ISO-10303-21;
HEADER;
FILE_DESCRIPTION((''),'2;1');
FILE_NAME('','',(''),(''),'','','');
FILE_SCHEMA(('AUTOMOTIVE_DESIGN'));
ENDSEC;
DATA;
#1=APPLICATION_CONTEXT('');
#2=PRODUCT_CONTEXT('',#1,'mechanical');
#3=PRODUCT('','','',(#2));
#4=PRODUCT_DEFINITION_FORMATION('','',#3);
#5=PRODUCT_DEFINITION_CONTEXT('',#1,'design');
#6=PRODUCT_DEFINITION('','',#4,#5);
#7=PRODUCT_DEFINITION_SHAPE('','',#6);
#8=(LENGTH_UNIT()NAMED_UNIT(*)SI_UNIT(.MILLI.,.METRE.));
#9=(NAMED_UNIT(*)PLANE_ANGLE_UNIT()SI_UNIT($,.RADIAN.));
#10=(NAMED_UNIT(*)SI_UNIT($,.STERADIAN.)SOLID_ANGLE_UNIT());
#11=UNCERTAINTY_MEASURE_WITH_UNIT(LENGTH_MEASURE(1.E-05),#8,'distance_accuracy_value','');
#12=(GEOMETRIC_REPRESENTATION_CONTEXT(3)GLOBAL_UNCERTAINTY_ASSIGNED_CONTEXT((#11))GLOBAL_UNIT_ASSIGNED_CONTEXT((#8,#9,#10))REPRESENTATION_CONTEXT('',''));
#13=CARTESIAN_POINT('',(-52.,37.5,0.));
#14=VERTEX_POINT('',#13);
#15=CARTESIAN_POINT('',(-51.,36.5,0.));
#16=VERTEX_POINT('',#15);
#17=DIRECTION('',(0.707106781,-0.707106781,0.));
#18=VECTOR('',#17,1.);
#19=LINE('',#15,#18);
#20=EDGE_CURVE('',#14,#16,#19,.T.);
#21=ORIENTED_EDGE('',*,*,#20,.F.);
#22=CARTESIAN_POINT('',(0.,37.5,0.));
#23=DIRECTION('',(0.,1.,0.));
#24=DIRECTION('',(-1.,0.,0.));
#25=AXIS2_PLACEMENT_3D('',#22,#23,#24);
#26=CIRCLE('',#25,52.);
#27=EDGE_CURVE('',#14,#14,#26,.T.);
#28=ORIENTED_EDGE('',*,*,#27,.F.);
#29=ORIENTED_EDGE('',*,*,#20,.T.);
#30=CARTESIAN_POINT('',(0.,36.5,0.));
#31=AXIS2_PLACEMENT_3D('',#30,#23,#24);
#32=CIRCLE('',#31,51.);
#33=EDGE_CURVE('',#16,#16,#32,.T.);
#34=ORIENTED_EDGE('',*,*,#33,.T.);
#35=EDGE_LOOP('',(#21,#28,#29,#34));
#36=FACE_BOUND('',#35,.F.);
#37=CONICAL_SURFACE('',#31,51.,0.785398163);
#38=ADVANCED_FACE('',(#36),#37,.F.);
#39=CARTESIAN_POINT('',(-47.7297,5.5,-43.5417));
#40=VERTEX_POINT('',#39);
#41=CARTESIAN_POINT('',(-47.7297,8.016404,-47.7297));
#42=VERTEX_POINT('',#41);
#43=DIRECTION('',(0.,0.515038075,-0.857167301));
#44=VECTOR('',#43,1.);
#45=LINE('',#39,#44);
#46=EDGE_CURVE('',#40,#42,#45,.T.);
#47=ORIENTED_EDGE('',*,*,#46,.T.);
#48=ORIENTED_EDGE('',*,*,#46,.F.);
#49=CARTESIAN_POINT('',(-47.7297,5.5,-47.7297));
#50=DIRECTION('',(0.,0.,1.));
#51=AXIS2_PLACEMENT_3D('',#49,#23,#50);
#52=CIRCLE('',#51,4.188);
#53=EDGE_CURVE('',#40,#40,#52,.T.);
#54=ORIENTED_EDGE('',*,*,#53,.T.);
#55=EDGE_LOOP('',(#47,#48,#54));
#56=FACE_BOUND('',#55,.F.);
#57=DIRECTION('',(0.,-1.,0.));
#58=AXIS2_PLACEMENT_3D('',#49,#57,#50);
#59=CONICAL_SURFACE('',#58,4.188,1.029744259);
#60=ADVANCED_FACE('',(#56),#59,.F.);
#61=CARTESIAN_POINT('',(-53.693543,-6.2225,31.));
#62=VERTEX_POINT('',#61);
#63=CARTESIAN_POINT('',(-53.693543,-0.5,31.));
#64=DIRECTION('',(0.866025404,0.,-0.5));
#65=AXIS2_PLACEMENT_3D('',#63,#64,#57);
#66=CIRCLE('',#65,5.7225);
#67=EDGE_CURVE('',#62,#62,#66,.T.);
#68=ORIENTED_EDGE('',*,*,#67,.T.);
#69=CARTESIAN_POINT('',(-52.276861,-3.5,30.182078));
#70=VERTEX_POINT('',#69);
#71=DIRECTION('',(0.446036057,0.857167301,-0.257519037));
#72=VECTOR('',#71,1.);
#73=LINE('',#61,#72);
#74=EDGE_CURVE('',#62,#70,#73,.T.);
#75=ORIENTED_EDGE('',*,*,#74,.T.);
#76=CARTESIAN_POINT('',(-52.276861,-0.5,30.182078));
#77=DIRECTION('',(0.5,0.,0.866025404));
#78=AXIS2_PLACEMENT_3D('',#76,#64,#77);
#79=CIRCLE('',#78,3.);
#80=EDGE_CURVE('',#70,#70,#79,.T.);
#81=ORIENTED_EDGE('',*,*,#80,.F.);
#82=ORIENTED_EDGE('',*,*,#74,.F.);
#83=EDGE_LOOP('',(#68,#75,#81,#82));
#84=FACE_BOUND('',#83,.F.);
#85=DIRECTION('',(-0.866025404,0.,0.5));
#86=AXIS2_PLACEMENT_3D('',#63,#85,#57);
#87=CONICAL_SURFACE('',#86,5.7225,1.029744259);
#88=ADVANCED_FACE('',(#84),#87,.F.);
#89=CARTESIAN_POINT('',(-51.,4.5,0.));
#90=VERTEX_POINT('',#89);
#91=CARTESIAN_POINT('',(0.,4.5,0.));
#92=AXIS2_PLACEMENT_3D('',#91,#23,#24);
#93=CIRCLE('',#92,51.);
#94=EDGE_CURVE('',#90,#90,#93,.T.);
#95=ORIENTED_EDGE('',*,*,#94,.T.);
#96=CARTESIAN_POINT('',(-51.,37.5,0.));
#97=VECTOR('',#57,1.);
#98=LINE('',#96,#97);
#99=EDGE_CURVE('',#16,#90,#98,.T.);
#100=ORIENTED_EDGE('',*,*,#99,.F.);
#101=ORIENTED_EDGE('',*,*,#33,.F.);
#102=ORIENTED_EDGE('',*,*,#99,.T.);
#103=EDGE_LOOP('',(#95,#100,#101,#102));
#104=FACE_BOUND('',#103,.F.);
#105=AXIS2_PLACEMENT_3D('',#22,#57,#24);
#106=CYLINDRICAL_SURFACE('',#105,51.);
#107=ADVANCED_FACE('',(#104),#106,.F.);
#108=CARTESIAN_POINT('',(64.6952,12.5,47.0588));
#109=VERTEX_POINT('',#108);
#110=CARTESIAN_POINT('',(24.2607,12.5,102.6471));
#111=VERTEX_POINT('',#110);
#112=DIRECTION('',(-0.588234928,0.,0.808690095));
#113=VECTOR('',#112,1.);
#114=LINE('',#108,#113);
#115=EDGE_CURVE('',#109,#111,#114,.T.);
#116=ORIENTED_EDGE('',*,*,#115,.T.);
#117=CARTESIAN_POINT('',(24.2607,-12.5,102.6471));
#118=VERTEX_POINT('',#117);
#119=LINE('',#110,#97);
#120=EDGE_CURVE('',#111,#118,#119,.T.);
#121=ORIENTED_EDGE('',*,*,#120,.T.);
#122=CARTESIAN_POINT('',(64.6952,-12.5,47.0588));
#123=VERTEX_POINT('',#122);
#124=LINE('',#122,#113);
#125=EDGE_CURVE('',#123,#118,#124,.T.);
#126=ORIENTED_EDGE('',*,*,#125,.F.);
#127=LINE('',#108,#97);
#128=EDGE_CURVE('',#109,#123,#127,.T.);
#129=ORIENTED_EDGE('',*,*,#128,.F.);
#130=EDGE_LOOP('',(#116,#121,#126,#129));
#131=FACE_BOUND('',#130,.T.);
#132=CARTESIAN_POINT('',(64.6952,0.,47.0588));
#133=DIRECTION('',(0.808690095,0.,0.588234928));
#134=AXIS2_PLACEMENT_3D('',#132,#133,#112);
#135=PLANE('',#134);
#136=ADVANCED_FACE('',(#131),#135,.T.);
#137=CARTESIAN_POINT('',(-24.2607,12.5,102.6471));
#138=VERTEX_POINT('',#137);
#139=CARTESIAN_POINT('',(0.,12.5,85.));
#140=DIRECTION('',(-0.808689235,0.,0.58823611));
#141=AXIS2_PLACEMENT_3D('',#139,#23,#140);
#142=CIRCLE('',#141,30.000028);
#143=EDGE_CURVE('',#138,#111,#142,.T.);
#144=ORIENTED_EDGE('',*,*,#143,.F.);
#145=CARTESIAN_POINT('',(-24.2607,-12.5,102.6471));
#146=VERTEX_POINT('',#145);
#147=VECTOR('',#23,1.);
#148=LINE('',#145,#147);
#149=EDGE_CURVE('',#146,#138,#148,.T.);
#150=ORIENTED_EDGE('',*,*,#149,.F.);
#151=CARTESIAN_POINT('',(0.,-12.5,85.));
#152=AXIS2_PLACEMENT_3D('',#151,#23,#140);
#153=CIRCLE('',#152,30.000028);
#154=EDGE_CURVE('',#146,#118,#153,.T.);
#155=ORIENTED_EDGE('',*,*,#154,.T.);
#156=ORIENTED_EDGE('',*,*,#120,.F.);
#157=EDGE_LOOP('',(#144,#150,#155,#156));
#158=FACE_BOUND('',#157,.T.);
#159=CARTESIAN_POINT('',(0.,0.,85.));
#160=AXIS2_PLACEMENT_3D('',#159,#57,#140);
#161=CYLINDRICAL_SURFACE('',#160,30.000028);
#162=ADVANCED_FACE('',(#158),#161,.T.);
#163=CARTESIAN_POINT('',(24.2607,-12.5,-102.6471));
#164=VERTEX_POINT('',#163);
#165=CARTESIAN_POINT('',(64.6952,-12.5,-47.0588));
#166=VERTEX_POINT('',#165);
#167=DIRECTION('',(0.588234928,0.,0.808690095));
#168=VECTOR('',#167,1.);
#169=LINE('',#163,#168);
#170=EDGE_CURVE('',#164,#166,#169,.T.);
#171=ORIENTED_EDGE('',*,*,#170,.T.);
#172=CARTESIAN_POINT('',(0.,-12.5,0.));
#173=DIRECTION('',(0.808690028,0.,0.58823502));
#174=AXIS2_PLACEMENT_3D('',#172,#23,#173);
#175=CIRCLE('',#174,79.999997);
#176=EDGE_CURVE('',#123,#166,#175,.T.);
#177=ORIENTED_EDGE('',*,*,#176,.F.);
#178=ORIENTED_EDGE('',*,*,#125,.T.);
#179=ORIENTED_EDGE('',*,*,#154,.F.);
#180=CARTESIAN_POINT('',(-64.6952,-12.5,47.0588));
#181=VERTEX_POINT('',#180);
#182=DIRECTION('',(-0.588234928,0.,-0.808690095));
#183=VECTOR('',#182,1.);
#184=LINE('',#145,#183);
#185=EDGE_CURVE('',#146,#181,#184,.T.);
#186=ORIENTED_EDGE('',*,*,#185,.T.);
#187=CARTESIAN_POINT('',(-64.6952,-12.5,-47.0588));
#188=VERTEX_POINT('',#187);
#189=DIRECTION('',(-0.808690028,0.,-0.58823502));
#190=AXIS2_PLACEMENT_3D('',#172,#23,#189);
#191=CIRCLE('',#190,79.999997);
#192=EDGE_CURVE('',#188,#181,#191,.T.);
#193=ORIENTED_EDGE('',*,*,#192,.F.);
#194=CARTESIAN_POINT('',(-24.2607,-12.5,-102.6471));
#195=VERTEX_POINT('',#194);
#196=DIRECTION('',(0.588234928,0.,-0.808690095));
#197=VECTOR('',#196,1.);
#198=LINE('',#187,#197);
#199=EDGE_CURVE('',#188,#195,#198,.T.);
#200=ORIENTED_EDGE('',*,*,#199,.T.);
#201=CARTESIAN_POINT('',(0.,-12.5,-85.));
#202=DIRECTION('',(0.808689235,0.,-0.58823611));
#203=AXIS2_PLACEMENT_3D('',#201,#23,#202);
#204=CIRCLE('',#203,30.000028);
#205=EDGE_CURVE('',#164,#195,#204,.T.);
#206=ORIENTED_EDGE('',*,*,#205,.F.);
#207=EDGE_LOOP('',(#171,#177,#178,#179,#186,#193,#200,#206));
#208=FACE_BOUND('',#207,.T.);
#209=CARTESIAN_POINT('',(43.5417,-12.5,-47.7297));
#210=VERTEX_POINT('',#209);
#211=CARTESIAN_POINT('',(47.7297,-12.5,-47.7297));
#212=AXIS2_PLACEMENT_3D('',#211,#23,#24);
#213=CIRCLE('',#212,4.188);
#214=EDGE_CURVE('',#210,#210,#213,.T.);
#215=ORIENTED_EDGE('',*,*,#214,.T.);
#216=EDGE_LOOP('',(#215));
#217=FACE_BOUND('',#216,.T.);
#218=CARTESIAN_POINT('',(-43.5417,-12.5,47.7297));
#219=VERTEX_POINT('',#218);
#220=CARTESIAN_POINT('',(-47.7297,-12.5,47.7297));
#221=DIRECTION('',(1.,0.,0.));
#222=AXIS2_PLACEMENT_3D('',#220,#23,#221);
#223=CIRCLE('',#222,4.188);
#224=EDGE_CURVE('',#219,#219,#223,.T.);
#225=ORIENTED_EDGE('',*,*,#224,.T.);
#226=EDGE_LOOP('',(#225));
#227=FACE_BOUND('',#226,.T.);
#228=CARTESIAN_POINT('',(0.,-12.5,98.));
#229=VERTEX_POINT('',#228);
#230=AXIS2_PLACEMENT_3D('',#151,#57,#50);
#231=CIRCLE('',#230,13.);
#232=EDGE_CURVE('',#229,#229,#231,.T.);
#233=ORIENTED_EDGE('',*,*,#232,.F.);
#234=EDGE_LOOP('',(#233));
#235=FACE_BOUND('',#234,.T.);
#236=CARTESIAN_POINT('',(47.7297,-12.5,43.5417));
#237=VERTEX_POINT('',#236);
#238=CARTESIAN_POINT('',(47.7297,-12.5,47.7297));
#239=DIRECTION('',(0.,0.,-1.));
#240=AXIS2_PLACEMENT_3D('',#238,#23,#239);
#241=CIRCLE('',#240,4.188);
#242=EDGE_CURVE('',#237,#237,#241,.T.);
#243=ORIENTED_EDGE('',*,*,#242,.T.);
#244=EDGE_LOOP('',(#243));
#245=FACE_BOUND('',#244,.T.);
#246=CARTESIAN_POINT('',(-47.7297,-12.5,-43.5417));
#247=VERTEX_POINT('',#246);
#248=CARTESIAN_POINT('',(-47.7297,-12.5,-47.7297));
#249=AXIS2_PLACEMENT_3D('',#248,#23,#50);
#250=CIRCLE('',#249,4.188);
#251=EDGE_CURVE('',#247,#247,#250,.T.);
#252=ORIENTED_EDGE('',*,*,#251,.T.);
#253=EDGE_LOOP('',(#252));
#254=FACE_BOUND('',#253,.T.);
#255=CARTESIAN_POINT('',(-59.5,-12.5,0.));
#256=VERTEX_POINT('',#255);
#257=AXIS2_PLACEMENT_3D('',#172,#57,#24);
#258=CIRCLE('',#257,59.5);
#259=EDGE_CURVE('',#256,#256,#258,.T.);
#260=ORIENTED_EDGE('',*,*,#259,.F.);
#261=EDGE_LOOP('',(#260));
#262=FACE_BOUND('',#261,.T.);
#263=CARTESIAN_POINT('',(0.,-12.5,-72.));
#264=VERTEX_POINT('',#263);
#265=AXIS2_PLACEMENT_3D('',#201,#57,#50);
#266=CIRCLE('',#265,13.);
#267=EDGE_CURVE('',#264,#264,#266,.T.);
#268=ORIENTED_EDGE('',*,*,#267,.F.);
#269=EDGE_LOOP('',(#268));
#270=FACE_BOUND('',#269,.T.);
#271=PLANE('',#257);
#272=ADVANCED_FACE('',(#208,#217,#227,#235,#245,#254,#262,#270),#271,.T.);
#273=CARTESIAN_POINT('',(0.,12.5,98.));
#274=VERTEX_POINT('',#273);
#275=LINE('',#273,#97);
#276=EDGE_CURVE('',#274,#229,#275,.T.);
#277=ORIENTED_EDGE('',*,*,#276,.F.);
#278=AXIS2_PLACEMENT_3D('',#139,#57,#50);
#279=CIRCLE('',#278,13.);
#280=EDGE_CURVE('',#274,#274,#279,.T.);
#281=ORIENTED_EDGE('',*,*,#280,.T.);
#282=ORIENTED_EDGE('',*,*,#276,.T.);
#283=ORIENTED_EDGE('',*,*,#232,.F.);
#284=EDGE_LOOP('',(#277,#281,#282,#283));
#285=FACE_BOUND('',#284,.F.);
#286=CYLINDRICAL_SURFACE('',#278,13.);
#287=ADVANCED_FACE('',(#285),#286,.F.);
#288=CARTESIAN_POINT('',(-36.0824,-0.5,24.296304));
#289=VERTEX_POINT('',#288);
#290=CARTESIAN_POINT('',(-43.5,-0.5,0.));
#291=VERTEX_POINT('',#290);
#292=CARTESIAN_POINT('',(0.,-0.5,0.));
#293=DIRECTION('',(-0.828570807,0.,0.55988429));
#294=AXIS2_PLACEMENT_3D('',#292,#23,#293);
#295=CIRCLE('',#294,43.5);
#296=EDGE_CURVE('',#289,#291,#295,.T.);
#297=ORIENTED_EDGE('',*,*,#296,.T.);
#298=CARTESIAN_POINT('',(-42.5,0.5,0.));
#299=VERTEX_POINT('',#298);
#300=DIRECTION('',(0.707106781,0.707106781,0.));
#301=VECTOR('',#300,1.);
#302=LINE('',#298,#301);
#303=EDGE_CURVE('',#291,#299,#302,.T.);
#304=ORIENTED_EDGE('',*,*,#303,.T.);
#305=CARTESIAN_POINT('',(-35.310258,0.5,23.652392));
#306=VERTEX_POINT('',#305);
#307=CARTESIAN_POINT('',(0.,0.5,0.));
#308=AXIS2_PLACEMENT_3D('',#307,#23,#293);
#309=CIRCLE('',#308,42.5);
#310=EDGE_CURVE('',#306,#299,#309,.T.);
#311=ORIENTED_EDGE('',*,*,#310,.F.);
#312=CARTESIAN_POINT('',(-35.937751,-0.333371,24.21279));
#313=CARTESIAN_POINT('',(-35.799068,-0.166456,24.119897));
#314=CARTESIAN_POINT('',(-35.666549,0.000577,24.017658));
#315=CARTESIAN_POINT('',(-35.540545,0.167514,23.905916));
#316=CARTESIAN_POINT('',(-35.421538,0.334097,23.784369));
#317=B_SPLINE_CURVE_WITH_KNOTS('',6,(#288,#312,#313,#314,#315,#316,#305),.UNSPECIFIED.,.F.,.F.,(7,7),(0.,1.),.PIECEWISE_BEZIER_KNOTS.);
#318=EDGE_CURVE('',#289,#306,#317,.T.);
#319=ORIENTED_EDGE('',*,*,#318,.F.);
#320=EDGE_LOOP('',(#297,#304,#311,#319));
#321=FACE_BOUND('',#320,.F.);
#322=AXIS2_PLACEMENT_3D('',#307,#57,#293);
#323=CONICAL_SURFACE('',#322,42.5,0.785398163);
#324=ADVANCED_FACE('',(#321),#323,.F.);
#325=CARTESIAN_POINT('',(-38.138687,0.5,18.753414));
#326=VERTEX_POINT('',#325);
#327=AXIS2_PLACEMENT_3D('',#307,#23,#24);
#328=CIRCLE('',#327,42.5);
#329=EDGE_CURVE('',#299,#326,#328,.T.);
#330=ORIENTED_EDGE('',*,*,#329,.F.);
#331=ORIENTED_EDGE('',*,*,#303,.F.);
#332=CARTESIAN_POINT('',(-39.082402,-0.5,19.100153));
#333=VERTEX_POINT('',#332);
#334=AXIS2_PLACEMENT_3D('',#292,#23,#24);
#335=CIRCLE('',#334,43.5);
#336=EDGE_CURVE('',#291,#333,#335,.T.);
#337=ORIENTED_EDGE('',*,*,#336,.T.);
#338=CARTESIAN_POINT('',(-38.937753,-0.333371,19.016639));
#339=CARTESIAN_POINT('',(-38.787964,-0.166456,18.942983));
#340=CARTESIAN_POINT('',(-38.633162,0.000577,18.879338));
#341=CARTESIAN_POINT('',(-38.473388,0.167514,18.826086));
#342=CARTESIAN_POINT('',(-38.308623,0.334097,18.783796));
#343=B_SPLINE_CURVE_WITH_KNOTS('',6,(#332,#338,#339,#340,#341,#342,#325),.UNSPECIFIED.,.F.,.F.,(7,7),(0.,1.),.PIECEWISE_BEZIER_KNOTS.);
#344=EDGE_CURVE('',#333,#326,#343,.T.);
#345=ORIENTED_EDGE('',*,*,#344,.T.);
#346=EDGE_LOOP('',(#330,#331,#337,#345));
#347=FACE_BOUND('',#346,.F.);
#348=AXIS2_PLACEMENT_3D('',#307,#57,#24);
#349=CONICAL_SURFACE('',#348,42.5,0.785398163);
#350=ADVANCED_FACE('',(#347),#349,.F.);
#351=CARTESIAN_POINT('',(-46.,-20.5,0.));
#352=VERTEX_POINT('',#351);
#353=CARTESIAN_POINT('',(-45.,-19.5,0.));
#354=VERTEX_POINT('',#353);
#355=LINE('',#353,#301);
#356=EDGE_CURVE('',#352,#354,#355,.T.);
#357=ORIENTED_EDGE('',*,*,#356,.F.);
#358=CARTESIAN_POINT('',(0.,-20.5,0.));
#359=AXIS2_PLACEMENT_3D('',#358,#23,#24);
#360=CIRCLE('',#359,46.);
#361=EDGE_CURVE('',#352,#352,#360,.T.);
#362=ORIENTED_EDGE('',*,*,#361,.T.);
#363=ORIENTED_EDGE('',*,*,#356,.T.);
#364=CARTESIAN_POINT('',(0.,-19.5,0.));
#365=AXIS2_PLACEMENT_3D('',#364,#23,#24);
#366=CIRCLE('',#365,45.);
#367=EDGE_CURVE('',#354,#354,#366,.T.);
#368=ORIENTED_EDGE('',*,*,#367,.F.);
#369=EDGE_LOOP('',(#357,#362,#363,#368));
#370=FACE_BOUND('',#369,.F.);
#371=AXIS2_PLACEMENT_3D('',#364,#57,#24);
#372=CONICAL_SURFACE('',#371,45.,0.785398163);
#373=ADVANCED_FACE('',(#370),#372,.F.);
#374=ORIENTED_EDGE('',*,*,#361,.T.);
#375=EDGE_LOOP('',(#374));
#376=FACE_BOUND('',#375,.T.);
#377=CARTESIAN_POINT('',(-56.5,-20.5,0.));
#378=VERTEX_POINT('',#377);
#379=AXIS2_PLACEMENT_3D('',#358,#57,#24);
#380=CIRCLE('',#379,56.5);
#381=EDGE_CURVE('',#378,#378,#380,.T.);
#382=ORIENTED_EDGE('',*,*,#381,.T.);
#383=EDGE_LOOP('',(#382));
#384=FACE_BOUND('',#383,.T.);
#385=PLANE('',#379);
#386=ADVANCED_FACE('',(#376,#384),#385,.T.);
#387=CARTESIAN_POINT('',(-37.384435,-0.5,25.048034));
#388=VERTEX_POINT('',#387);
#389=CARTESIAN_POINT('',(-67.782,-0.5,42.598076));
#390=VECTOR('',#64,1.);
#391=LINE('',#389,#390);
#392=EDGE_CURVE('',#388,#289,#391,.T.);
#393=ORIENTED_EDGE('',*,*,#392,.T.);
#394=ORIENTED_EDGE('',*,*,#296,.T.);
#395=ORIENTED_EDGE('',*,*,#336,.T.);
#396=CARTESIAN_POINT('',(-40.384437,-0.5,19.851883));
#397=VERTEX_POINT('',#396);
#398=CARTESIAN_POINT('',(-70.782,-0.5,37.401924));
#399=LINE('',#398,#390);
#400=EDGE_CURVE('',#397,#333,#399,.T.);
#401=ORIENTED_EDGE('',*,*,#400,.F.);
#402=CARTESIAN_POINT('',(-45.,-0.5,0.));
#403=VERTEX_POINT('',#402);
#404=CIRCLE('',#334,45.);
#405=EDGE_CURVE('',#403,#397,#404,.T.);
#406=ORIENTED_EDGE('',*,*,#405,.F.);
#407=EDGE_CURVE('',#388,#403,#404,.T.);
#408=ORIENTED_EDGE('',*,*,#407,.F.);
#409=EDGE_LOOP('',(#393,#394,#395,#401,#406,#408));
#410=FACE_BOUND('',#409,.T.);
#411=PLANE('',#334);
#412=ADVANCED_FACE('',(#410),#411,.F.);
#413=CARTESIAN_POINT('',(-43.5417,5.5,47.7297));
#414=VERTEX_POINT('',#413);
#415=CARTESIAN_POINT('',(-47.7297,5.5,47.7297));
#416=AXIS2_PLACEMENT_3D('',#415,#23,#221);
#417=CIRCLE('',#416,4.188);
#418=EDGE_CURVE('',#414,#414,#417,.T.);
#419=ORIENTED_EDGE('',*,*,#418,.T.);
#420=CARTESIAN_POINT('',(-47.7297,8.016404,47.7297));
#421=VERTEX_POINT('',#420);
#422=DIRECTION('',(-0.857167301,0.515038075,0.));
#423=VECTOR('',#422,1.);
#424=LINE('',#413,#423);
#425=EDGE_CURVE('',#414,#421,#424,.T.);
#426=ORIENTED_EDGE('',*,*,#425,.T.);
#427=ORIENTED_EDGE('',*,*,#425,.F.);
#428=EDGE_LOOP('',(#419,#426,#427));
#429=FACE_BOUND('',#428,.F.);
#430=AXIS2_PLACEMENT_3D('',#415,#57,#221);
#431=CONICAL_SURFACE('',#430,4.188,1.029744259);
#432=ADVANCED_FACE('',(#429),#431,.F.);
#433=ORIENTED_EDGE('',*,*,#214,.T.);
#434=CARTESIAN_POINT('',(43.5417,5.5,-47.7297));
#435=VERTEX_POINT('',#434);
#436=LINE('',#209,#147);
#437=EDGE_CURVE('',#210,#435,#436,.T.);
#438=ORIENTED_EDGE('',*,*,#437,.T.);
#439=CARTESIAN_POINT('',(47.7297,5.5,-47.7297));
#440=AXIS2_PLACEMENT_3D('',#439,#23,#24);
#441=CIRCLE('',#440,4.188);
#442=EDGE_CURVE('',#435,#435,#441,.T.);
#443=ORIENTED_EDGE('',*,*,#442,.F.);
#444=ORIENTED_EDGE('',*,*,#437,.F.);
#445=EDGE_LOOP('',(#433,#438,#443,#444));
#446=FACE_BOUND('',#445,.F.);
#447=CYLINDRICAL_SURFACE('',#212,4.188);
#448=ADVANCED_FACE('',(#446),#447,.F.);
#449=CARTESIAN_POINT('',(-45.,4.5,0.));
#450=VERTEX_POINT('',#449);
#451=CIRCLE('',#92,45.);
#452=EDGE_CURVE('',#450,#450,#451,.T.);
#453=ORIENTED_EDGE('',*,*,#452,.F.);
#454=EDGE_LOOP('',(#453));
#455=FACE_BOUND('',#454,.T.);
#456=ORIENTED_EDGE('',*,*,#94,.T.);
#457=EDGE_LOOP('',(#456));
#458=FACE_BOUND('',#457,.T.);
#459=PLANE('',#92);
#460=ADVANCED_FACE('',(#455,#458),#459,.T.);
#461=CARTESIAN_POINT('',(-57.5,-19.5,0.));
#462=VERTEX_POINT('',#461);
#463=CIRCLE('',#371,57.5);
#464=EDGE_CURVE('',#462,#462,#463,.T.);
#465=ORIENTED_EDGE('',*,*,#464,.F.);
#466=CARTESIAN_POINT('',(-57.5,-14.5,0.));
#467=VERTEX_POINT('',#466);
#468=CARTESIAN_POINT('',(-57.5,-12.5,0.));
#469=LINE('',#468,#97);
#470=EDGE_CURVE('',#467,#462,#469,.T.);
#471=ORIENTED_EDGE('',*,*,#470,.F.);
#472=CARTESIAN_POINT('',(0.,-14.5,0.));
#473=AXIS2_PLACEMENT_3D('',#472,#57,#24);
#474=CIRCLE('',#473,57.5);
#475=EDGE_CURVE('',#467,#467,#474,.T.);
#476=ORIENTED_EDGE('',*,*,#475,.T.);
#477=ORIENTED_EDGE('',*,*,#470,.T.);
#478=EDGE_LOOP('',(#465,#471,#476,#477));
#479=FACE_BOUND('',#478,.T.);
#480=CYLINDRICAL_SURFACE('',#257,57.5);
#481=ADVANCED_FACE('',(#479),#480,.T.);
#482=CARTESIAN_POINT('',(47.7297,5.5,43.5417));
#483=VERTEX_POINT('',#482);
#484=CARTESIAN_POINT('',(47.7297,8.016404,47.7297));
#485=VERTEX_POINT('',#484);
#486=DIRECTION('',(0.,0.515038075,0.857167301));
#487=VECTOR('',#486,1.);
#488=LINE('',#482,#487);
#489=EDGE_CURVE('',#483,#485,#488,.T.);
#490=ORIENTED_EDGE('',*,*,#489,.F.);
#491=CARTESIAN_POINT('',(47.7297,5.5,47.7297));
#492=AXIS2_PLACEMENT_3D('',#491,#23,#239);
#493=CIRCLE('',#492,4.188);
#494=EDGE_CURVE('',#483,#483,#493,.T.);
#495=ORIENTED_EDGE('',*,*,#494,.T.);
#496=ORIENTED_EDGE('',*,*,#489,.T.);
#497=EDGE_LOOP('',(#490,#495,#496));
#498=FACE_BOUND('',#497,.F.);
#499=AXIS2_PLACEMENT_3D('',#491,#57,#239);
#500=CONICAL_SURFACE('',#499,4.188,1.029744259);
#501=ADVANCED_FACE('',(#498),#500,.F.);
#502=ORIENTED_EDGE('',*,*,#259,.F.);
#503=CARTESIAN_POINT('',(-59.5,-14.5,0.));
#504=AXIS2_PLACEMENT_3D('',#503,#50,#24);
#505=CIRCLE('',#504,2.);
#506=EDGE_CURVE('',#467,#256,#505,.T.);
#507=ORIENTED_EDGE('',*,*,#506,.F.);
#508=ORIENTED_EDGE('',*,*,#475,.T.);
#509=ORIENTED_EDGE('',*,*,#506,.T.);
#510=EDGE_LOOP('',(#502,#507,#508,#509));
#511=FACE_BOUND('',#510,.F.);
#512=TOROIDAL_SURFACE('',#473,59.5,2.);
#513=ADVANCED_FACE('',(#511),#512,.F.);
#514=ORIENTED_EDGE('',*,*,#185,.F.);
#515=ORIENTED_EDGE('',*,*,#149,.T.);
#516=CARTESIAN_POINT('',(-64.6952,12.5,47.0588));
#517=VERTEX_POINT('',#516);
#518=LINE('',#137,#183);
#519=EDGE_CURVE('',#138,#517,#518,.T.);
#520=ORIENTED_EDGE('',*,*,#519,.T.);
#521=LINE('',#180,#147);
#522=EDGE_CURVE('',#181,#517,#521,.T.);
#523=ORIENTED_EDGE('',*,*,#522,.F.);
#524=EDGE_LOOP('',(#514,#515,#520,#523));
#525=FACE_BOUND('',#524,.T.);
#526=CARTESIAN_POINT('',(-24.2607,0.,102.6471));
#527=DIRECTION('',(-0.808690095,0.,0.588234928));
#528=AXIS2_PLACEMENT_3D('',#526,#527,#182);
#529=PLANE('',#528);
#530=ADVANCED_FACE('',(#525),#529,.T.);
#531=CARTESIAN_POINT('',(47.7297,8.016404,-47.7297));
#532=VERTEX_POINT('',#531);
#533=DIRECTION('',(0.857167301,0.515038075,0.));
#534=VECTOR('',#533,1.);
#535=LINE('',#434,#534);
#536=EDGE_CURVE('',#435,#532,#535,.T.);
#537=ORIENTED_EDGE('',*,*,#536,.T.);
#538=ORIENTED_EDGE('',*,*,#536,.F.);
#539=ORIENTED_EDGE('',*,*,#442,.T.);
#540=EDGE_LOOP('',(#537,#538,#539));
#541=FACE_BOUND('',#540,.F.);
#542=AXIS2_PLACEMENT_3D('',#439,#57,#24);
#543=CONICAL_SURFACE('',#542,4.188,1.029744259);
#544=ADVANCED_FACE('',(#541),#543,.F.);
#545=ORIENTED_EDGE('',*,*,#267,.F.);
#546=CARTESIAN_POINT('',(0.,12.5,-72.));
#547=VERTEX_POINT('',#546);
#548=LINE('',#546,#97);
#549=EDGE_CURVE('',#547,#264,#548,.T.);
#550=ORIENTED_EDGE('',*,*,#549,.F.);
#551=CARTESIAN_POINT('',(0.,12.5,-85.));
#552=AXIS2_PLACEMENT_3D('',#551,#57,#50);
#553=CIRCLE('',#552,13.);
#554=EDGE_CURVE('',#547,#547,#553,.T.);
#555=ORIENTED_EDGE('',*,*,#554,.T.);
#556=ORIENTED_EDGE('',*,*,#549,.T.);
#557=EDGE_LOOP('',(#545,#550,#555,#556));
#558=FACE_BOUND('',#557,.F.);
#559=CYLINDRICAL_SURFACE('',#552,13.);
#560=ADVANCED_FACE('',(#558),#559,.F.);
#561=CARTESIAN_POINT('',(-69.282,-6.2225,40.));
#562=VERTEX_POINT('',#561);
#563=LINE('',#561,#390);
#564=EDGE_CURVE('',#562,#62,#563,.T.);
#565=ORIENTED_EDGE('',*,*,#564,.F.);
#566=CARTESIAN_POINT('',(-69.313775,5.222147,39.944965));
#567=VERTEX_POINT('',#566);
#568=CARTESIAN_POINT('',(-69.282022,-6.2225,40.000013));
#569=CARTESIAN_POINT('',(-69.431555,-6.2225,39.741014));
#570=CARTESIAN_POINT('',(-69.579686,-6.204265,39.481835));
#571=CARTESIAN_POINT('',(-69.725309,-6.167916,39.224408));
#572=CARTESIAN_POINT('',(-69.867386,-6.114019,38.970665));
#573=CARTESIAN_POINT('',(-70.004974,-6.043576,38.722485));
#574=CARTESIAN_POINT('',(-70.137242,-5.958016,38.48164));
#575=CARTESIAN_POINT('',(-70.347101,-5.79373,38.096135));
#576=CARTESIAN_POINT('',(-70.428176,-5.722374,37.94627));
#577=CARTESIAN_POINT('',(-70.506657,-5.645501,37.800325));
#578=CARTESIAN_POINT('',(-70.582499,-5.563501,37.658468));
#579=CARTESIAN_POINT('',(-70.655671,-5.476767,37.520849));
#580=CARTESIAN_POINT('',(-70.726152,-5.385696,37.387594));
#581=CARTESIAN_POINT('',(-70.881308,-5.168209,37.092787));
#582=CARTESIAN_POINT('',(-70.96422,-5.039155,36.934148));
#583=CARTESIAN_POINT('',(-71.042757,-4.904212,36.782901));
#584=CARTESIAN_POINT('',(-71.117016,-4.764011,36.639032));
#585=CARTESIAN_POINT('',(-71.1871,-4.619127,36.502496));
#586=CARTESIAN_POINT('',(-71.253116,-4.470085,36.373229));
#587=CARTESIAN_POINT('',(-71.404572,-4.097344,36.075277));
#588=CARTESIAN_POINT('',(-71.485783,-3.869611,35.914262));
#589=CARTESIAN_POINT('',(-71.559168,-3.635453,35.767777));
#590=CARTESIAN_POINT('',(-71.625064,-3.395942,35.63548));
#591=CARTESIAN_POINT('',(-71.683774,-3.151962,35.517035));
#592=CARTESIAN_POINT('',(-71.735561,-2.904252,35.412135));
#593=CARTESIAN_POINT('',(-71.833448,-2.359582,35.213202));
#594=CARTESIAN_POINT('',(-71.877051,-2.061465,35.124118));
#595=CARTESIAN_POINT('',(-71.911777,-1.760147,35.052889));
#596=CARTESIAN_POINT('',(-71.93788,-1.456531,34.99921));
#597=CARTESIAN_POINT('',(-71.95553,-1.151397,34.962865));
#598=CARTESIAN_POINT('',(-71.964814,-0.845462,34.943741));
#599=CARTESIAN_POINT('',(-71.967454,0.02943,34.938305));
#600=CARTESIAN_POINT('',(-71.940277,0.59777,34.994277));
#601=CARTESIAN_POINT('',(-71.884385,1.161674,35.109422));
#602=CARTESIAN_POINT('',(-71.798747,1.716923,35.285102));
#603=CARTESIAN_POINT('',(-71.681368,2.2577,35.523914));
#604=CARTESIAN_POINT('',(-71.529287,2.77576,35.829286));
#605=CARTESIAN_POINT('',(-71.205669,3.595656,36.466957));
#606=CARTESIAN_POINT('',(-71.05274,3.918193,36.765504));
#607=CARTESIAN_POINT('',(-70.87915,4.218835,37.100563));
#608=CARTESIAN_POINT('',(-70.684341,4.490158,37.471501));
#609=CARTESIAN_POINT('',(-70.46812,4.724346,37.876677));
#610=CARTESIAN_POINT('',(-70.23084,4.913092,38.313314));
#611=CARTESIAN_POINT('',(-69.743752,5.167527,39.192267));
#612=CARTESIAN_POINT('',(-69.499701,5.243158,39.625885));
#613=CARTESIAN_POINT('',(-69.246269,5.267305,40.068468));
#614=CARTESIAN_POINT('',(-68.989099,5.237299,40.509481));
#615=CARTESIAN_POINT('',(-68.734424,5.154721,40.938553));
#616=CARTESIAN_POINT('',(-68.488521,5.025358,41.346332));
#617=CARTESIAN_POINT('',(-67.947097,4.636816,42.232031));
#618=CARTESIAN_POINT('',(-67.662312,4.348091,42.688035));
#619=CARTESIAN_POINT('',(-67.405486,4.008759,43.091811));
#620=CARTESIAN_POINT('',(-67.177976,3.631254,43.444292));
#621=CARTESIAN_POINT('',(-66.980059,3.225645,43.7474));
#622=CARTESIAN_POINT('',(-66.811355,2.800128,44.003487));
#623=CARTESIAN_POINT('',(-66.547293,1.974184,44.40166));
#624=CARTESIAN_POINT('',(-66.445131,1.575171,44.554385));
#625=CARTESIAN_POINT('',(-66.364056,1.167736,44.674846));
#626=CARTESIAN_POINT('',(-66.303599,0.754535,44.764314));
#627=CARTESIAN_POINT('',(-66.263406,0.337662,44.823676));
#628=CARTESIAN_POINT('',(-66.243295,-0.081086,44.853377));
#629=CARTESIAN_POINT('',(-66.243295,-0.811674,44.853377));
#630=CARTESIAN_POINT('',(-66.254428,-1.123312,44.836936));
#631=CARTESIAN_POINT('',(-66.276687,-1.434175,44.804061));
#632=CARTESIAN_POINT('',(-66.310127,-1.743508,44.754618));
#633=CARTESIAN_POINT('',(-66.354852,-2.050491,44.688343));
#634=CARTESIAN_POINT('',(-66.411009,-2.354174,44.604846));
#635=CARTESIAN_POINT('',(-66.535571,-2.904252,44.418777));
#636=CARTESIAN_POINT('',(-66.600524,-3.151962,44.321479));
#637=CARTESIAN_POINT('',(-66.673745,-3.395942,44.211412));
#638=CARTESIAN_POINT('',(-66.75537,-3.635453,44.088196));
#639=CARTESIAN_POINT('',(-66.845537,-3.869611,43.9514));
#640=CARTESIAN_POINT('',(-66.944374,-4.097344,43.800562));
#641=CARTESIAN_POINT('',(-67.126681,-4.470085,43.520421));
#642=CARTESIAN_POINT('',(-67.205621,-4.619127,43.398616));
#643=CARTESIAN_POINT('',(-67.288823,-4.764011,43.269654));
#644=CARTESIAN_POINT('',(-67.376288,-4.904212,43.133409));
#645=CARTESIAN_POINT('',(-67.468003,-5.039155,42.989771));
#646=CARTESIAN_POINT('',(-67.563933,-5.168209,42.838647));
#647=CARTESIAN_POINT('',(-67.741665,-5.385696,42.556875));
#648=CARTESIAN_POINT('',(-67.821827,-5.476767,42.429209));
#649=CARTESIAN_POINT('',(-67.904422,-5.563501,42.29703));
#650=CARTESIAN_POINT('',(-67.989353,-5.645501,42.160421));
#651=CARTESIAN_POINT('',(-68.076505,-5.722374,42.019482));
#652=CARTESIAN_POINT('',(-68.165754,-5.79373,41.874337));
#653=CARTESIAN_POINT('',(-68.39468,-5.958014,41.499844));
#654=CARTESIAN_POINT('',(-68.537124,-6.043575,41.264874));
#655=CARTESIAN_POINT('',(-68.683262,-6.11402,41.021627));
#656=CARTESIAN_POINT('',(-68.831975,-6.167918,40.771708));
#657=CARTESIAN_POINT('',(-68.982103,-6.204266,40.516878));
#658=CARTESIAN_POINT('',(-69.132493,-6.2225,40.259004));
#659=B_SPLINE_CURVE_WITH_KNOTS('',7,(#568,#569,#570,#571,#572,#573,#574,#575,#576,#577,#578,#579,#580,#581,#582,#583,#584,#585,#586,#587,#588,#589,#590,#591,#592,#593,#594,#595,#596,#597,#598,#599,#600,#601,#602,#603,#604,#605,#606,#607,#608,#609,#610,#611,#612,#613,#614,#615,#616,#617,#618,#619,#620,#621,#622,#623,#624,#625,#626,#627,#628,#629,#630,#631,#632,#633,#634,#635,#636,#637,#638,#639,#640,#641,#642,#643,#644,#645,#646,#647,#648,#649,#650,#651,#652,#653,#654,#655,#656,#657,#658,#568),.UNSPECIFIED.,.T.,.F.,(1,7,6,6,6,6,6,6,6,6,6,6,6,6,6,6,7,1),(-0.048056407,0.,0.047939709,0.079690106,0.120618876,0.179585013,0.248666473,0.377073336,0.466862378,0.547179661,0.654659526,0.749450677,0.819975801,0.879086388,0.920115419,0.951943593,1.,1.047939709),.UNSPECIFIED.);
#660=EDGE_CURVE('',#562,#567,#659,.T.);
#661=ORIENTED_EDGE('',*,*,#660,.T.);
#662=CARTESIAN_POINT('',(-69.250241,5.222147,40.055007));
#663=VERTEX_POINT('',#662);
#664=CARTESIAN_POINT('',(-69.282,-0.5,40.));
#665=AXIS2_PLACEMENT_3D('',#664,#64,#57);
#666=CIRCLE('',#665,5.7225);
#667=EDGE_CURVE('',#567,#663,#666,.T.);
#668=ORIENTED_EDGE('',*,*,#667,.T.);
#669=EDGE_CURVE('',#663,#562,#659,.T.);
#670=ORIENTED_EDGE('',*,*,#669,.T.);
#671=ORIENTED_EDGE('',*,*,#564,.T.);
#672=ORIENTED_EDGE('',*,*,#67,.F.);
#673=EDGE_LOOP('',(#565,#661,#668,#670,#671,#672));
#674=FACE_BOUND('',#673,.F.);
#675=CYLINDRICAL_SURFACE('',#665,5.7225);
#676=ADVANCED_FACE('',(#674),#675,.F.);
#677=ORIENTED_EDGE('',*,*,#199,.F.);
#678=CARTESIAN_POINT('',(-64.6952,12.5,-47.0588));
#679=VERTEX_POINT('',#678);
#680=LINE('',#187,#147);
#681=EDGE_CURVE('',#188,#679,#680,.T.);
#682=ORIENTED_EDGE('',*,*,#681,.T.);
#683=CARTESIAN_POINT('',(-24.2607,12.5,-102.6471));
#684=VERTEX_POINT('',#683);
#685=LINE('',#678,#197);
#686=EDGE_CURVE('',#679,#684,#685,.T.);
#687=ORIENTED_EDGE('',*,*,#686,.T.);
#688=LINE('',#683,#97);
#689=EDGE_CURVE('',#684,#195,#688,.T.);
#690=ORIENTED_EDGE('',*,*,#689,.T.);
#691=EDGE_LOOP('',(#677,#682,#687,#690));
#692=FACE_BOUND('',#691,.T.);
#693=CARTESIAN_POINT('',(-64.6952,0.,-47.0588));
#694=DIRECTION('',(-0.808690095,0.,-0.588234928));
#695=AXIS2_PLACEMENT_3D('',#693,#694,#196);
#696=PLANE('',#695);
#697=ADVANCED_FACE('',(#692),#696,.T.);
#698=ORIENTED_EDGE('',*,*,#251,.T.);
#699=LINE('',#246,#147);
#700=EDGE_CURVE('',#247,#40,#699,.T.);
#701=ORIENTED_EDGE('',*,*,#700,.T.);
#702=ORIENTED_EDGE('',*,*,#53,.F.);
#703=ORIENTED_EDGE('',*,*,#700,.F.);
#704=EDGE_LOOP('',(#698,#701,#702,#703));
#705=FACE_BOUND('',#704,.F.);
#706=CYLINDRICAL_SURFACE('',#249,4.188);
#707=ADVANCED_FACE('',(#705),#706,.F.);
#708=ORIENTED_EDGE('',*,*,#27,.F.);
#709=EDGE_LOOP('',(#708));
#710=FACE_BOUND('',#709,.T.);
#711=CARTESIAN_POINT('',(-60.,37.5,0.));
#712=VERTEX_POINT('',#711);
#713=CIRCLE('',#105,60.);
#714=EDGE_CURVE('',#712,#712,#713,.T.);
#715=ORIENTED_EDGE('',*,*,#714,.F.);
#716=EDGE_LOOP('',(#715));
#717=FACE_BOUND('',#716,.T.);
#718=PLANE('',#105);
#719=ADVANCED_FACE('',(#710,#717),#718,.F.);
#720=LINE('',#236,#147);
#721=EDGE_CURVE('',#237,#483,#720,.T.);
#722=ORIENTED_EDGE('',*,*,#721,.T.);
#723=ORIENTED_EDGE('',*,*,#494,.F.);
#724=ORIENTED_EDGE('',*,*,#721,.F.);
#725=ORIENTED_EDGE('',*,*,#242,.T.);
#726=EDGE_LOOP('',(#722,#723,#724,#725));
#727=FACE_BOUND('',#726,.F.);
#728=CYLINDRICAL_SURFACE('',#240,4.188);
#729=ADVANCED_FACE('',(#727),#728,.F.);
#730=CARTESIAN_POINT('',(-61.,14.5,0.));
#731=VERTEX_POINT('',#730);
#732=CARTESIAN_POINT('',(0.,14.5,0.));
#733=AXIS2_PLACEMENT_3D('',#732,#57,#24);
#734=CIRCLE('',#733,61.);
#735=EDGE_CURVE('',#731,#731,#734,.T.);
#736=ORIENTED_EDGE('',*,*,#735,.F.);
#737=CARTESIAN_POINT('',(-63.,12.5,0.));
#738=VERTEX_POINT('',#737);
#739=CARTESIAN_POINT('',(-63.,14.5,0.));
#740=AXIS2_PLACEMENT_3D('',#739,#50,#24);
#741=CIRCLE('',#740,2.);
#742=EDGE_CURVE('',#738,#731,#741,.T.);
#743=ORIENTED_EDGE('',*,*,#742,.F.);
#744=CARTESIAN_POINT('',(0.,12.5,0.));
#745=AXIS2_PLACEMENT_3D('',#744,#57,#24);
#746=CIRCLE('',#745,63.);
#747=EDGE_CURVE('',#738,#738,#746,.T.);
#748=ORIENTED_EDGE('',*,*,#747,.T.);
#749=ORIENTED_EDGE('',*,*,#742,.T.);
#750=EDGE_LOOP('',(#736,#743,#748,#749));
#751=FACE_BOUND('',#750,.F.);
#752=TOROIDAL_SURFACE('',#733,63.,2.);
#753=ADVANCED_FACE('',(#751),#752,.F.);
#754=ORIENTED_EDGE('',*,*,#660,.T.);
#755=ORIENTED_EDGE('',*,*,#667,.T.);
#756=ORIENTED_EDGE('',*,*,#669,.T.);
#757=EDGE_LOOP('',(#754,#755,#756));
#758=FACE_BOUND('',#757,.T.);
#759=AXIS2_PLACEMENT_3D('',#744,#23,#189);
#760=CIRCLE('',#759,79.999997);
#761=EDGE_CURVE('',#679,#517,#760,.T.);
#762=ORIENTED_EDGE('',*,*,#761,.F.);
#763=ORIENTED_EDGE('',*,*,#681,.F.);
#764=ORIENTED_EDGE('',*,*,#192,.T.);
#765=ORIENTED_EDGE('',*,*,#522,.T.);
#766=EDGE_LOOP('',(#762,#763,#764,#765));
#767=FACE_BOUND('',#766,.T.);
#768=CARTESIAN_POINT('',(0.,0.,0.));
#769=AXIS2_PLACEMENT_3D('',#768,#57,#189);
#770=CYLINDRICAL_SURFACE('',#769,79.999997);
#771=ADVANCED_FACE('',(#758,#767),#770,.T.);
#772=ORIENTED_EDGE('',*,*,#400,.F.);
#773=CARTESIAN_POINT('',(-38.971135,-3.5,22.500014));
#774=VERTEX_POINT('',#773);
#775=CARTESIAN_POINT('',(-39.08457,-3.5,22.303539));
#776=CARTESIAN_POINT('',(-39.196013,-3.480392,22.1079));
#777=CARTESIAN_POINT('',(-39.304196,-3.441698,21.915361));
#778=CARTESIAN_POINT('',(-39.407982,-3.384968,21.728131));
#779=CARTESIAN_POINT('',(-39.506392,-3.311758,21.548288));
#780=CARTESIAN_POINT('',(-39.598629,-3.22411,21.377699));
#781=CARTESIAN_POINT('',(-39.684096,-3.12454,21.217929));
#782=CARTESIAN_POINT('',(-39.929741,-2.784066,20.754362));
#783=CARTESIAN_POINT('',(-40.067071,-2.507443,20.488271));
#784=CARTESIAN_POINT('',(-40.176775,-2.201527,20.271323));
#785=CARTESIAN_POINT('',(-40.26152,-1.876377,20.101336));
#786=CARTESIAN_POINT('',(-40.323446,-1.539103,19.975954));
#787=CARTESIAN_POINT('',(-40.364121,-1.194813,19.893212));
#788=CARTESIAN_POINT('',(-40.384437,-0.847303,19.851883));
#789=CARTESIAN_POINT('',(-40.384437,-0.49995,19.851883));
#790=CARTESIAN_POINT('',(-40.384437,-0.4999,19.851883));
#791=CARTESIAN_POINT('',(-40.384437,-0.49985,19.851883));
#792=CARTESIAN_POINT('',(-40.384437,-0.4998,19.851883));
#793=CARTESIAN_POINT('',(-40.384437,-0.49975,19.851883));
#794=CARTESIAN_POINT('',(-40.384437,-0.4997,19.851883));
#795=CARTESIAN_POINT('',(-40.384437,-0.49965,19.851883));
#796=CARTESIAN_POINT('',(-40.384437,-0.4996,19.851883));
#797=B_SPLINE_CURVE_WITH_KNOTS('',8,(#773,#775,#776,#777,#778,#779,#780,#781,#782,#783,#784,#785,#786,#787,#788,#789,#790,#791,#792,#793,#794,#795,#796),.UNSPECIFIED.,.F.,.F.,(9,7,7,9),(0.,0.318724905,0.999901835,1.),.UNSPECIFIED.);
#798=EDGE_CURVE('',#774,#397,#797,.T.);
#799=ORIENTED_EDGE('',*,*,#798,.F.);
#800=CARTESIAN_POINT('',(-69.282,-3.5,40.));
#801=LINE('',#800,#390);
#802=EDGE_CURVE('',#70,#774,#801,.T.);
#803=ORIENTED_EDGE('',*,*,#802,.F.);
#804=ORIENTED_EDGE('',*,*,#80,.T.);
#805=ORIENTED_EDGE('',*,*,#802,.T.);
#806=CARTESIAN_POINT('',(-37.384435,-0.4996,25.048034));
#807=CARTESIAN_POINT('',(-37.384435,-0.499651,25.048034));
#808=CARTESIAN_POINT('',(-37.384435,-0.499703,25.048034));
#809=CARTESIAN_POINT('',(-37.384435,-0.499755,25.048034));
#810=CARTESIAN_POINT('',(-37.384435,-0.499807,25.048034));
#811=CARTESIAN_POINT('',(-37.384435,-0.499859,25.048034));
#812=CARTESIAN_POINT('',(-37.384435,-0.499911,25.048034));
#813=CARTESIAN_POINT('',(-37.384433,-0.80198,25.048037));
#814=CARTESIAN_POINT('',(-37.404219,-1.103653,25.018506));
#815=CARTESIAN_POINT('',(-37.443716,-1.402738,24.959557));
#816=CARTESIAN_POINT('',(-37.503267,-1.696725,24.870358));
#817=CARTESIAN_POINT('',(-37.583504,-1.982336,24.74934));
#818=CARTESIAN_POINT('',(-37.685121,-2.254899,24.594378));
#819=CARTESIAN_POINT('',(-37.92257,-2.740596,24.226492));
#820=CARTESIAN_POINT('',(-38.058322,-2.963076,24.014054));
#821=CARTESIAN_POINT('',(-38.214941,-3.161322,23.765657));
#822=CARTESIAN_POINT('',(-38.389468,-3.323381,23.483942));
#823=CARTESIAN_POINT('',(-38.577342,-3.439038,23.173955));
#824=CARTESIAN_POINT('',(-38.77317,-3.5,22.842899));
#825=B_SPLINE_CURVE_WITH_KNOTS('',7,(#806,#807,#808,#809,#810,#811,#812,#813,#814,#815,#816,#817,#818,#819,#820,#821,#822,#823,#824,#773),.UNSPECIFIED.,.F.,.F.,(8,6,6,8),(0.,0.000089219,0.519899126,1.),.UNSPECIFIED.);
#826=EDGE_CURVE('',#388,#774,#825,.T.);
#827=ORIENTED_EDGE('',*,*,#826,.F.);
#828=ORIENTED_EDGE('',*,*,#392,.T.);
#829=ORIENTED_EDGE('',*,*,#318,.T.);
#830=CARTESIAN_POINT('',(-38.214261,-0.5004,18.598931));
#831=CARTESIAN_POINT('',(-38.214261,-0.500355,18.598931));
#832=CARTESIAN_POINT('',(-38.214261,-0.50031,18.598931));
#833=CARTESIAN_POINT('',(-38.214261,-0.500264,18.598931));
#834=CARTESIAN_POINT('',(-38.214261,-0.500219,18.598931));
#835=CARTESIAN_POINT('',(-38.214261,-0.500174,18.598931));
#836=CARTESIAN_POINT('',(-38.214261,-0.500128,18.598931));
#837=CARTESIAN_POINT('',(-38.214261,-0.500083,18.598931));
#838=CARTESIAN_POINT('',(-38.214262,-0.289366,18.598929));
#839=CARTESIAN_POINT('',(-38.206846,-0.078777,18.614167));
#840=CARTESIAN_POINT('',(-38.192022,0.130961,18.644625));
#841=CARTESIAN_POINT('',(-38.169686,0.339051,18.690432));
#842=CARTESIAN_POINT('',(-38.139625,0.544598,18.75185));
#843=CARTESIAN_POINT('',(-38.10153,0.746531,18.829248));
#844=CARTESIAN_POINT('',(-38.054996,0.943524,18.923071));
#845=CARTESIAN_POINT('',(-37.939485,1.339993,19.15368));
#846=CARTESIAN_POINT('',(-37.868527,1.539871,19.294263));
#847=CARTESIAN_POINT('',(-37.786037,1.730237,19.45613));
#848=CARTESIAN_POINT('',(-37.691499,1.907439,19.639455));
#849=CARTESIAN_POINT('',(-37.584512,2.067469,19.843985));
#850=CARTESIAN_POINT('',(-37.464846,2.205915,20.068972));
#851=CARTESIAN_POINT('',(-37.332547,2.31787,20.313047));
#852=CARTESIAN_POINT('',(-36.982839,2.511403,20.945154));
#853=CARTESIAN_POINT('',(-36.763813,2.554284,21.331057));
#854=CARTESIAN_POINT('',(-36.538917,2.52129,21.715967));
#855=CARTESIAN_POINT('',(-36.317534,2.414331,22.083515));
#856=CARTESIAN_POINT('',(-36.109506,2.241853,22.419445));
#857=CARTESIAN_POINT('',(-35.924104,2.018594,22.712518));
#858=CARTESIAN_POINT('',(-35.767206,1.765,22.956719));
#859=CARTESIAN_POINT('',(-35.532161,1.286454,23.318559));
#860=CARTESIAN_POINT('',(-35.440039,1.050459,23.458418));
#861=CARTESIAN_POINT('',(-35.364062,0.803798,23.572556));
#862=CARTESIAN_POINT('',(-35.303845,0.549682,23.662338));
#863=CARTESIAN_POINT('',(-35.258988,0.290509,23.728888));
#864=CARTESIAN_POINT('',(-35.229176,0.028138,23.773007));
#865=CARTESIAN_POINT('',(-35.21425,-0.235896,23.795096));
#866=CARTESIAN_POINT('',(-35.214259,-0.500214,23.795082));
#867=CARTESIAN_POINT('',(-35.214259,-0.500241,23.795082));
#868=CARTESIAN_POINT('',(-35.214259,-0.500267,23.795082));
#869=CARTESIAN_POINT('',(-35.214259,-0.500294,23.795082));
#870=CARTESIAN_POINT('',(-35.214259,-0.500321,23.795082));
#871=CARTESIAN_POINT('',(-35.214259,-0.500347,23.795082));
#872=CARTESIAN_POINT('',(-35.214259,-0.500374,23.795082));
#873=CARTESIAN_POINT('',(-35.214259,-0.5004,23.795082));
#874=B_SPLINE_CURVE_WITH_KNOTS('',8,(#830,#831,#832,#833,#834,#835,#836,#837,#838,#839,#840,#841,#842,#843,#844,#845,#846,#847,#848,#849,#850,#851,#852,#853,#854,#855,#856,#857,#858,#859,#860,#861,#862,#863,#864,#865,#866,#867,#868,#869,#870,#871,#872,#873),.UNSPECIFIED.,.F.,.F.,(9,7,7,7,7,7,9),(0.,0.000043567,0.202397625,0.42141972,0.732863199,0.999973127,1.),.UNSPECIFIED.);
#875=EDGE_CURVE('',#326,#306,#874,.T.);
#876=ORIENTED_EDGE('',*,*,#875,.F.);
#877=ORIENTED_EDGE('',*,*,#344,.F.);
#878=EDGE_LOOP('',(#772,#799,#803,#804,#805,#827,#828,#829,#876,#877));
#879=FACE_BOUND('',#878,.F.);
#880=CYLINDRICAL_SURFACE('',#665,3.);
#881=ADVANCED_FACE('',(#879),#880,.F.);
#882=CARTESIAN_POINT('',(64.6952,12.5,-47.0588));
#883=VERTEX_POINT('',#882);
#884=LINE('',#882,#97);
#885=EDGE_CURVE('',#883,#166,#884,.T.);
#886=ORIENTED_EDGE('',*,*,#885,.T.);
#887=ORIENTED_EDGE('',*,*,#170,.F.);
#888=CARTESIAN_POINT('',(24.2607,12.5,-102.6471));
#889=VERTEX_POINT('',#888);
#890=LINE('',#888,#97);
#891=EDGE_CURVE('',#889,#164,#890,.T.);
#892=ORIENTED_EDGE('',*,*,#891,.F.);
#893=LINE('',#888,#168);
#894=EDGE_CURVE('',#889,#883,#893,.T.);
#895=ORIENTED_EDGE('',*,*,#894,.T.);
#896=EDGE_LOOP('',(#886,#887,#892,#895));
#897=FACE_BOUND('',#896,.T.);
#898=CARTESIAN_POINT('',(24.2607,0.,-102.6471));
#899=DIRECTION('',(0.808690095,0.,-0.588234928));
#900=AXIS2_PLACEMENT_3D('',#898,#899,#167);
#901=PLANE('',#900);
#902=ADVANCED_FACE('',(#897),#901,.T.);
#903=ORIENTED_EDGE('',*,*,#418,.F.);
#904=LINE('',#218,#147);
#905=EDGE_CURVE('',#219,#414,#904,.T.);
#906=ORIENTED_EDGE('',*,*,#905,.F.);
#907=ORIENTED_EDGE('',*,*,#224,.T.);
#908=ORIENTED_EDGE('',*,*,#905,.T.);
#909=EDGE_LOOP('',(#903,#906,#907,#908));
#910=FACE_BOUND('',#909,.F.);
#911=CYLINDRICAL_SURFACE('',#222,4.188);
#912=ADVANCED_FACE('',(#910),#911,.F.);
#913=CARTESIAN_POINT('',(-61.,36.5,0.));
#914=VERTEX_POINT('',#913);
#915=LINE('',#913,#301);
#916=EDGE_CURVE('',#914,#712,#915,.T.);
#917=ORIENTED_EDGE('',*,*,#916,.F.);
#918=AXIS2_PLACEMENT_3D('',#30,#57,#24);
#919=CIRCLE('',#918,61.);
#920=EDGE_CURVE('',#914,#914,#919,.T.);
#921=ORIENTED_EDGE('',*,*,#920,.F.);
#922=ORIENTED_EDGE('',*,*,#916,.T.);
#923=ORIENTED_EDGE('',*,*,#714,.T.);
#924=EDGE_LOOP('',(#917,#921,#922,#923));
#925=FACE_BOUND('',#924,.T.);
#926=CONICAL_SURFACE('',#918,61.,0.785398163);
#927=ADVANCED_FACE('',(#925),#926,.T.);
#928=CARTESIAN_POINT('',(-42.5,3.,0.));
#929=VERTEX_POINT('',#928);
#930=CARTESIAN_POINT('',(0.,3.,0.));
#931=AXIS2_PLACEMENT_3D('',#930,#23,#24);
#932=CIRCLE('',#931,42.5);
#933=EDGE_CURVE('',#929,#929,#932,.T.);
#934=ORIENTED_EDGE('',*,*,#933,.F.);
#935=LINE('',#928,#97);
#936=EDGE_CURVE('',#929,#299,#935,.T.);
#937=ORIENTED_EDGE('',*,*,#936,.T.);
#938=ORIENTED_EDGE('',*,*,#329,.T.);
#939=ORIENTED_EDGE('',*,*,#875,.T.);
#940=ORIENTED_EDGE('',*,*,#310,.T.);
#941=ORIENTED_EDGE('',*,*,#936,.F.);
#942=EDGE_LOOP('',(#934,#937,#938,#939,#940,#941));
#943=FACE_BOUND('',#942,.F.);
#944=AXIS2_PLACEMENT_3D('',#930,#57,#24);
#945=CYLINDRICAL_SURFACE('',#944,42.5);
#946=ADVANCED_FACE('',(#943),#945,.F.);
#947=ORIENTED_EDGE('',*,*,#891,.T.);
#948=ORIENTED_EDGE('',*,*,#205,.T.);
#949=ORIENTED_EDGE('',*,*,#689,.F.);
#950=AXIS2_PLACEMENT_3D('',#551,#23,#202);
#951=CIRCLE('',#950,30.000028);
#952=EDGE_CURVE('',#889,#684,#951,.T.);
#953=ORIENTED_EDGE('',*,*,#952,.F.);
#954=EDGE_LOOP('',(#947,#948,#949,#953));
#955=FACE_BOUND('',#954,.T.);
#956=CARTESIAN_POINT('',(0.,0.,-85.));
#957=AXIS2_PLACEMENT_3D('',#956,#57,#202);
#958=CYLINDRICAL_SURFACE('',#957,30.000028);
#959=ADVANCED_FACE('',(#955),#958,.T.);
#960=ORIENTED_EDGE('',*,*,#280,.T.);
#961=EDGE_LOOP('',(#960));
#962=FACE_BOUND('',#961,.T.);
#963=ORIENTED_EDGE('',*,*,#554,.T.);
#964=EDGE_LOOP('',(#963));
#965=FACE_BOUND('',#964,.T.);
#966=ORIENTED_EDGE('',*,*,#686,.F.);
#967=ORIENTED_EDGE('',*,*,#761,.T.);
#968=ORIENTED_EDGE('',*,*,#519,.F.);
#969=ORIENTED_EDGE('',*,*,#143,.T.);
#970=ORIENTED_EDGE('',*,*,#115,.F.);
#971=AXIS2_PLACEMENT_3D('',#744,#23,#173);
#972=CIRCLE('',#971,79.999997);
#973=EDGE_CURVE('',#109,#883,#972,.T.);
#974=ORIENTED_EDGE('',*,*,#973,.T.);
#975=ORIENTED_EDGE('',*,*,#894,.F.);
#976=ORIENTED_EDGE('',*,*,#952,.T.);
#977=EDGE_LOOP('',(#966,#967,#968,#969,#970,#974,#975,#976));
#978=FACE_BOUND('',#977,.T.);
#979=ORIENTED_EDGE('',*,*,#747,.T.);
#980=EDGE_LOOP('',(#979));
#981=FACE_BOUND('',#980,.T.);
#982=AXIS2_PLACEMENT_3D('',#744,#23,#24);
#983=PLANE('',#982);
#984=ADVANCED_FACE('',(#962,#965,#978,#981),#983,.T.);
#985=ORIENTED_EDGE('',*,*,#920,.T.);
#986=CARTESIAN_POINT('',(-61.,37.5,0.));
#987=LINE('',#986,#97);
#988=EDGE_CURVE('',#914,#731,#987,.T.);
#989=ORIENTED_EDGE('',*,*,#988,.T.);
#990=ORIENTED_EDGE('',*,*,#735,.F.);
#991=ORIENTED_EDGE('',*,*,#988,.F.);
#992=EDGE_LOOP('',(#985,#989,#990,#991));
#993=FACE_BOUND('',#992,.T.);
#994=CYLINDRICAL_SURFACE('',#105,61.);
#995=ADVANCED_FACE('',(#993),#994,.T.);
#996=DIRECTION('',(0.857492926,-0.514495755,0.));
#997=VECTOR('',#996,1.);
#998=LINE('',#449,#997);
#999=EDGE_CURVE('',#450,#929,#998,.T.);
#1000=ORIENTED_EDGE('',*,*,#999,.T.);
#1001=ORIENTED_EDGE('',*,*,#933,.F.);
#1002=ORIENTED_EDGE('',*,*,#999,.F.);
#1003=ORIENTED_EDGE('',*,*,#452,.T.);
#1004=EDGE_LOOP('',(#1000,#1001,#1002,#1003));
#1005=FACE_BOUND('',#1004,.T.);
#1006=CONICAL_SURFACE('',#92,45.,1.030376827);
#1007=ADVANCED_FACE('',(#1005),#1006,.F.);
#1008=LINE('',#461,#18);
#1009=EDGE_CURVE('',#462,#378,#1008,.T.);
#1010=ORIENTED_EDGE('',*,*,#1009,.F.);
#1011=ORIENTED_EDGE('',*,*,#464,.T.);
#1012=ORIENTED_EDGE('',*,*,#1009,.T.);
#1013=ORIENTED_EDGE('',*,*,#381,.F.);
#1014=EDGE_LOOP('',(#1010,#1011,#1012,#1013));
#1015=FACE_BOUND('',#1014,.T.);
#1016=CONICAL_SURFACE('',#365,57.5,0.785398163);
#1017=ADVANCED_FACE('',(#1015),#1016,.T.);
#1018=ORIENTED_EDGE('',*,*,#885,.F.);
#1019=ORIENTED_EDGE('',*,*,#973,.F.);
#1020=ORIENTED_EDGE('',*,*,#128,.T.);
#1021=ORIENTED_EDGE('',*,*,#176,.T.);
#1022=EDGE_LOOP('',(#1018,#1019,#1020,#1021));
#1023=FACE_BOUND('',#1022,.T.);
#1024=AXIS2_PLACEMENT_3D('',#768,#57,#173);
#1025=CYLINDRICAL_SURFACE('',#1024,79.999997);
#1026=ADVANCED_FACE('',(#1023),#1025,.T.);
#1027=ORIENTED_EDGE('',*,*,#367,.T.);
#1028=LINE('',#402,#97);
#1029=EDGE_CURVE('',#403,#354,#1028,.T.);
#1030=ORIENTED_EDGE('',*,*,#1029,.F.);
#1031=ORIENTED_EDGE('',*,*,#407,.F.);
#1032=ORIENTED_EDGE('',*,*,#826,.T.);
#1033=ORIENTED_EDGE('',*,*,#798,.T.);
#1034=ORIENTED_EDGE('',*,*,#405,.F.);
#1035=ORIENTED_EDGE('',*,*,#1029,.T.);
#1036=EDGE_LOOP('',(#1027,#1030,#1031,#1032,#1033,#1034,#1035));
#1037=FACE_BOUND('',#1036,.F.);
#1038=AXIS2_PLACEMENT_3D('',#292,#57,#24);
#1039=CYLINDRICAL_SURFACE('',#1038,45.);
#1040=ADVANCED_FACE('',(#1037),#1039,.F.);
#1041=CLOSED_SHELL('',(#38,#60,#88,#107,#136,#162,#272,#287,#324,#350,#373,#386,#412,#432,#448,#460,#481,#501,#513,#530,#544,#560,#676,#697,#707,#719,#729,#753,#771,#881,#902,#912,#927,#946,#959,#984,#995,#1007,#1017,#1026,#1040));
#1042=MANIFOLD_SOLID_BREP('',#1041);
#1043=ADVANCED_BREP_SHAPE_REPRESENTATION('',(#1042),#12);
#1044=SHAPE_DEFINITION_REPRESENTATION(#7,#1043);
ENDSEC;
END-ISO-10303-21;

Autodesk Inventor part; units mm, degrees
ref_plane "XZ Plane" through (0, 0, 0) normal (0, 1, 0) x (-1, 0, 0)
ref_plane "XY Plane" through (0, 0, 0) normal (0, 0, 1) x (1, 0, 0)
sketch "Sketch1" plane through (0, 0, 0) normal (0, 1, 0) x (-1, 0, 0)
  line L0 (64.6952, -47.0588) -> (24.2607, -102.6471)
  arc A0 (-24.2607, -102.6471) -> (24.2607, -102.6471) centre (0, -85) ccw
  line L1 (-24.2607, -102.6471) -> (-64.6952, -47.0588)
  arc A1 (-64.6952, 47.0588) -> (-64.6952, -47.0588) centre (0, 0) ccw
  line L2 (-64.6952, 47.0588) -> (-24.2607, 102.6471)
  arc A2 (24.2607, 102.6471) -> (-24.2607, 102.6471) centre (0, 85) ccw
  line L3 (24.2607, 102.6471) -> (64.6952, 47.0588)
  arc A3 (64.6952, -47.0588) -> (64.6952, 47.0588) centre (0, 0) ccw
  dimension "d0" = 170
  dimension "d1" = 160
  dimension "d3" = 30
extrude "Extrusion1" add sketch "Sketch1" along normal mid plane 25
sketch "Sketch2" plane through (0, 12.5, 0) normal (0, 1, 0) x (1, 0, 0)
  arc A0 (24.2607, 102.6471) -> (-24.2607, 102.6471) centre (0, 85) ccw projected
  arc A1 (-24.2607, -102.6471) -> (24.2607, -102.6471) centre (0, -85) ccw projected
hole "Hole1" at (0, 12.5, -85) at (0, 12.5, 85) direction (0, -1, 0) diameter 26 end through all
sketch "Sketch3" plane through (0, 0, 0) normal (0, 0, 1) x (1, 0, 0)
  line L0 (0, 37.5) -> (0, -20.5)
  line L1 (0, 37.5) -> (-61, 37.5)
  line L2 (-61, 37.5) -> (-61, -12.5)
  line L3 (-64.6952, -12.5) -> (-24.2607, -12.5) projected
  line L4 (-61, -12.5) -> (-57.5, -12.5)
  line L5 (-57.5, -12.5) -> (-57.5, -20.5)
  line L6 (-57.5, -20.5) -> (0, -20.5)
  line L7 (-24.2607, 12.5) -> (-64.6952, 12.5) projected
  point P0 (0, 0)
  dimension "d13" = 58
  dimension "d14" = 122
  dimension "d15" = 115
  dimension "d16" = 25
revolve "Revolution1" add sketch "Sketch3" angle 360 about axis through (0, 37.5, 0) along (0, -1, 0)
sketch "Sketch4" plane through (0, 0, 0) normal (0, 0, 1) x (1, 0, 0)
  line L0 (0, -20.5) -> (0, 37.5)
  line L1 (-61, 37.5) -> (61, 37.5) projected
  line L2 (0, 37.5) -> (-51, 37.5)
  line L3 (-51, 37.5) -> (-51, 4.5)
  line L4 (-51, 4.5) -> (-45, 4.5)
  line L5 (-42.5, 3) -> (-42.5, -0.5)
  line L6 (-42.5, -0.5) -> (-45, -0.5)
  line L7 (-45, -0.5) -> (-45, -20.5)
  line L8 (-57.5, -20.5) -> (57.5, -20.5) projected
  line L9 (-45, -20.5) -> (0, -20.5)
  line L10 (-45, 4.5) -> (-42.5, 3)
  point P0 (0, 0)
  dimension "d18" = 102
  dimension "d19" = 90
  dimension "d20" = 85
  dimension "d21" = 33
  dimension "d22" = 20
  dimension "d23" = 1.5
  dimension "d24" = 90
revolve "Revolution2" cut sketch "Sketch4" angle 360 about axis through (0, -20.5, 0) along (0, 1, 0)
hole "Hole2" at (-69.282, -0.5, 40) direction (0.8660254, 0, -0.5) diameter 6 end up to surface
hole "Hole3" at (-69.282, -0.5, 40) direction (0.8660254, 0, -0.5) diameter 11.445 depth 18 tip angle 118
thread "Thread1" size "G13.157x1.337" designation "G 1/4" standard "ISO Pipe Threads" length 14
sketch "Sketch5" plane through (0, -12.5, 0) normal (0, -1, 0) x (1, 0, 0)
  arc A0 (64.6952, -47.0588) -> (64.6952, 47.0588) centre (0, 0) ccw projected
  line L0 (0, 0) -> (47.7297, 47.7297) construction
  line L1 (0, 0) -> (67.5, 0) construction
  dimension "d48" = 67.5
  dimension "d49" = 45
hole "Hole4" at (47.7297, -12.5, 47.7297) direction (0, 1, 0) diameter 8.376 depth 18 tip angle 118 thread size "M10x1.5" class "6H" standard "ISO Metric profile"
pattern_circular "Circular Pattern1" count 4 over 360 about axis through (0, -16.5, 0) along (0, -1, 0) of "Hole4"
fillet "Fillet1" radius 2 2 edges at (61, 12.5, 0) (57.5, -12.5, 0)
chamfer "Chamfer1" distance 1 angle 45 6 edges at (57.5, -20.5, 0) (45, -20.5, 0) (61, 37.5, 0) (51, 37.5, 0) (-41.4147, -0.5, 9.5432) (40.6378, -0.5, -12.4427)
ref_plane "Work Plane1" through (0, -0.5, 0) normal (0, 1, 0) x (1, 0, 0)
ref_plane "Work Plane2" through (0, 0, 0) normal (-0.5, 0, -0.8660254) x (0, 1, 0)
properties part number "Part037. Main arbor flange" material "Steel, Carbon"
